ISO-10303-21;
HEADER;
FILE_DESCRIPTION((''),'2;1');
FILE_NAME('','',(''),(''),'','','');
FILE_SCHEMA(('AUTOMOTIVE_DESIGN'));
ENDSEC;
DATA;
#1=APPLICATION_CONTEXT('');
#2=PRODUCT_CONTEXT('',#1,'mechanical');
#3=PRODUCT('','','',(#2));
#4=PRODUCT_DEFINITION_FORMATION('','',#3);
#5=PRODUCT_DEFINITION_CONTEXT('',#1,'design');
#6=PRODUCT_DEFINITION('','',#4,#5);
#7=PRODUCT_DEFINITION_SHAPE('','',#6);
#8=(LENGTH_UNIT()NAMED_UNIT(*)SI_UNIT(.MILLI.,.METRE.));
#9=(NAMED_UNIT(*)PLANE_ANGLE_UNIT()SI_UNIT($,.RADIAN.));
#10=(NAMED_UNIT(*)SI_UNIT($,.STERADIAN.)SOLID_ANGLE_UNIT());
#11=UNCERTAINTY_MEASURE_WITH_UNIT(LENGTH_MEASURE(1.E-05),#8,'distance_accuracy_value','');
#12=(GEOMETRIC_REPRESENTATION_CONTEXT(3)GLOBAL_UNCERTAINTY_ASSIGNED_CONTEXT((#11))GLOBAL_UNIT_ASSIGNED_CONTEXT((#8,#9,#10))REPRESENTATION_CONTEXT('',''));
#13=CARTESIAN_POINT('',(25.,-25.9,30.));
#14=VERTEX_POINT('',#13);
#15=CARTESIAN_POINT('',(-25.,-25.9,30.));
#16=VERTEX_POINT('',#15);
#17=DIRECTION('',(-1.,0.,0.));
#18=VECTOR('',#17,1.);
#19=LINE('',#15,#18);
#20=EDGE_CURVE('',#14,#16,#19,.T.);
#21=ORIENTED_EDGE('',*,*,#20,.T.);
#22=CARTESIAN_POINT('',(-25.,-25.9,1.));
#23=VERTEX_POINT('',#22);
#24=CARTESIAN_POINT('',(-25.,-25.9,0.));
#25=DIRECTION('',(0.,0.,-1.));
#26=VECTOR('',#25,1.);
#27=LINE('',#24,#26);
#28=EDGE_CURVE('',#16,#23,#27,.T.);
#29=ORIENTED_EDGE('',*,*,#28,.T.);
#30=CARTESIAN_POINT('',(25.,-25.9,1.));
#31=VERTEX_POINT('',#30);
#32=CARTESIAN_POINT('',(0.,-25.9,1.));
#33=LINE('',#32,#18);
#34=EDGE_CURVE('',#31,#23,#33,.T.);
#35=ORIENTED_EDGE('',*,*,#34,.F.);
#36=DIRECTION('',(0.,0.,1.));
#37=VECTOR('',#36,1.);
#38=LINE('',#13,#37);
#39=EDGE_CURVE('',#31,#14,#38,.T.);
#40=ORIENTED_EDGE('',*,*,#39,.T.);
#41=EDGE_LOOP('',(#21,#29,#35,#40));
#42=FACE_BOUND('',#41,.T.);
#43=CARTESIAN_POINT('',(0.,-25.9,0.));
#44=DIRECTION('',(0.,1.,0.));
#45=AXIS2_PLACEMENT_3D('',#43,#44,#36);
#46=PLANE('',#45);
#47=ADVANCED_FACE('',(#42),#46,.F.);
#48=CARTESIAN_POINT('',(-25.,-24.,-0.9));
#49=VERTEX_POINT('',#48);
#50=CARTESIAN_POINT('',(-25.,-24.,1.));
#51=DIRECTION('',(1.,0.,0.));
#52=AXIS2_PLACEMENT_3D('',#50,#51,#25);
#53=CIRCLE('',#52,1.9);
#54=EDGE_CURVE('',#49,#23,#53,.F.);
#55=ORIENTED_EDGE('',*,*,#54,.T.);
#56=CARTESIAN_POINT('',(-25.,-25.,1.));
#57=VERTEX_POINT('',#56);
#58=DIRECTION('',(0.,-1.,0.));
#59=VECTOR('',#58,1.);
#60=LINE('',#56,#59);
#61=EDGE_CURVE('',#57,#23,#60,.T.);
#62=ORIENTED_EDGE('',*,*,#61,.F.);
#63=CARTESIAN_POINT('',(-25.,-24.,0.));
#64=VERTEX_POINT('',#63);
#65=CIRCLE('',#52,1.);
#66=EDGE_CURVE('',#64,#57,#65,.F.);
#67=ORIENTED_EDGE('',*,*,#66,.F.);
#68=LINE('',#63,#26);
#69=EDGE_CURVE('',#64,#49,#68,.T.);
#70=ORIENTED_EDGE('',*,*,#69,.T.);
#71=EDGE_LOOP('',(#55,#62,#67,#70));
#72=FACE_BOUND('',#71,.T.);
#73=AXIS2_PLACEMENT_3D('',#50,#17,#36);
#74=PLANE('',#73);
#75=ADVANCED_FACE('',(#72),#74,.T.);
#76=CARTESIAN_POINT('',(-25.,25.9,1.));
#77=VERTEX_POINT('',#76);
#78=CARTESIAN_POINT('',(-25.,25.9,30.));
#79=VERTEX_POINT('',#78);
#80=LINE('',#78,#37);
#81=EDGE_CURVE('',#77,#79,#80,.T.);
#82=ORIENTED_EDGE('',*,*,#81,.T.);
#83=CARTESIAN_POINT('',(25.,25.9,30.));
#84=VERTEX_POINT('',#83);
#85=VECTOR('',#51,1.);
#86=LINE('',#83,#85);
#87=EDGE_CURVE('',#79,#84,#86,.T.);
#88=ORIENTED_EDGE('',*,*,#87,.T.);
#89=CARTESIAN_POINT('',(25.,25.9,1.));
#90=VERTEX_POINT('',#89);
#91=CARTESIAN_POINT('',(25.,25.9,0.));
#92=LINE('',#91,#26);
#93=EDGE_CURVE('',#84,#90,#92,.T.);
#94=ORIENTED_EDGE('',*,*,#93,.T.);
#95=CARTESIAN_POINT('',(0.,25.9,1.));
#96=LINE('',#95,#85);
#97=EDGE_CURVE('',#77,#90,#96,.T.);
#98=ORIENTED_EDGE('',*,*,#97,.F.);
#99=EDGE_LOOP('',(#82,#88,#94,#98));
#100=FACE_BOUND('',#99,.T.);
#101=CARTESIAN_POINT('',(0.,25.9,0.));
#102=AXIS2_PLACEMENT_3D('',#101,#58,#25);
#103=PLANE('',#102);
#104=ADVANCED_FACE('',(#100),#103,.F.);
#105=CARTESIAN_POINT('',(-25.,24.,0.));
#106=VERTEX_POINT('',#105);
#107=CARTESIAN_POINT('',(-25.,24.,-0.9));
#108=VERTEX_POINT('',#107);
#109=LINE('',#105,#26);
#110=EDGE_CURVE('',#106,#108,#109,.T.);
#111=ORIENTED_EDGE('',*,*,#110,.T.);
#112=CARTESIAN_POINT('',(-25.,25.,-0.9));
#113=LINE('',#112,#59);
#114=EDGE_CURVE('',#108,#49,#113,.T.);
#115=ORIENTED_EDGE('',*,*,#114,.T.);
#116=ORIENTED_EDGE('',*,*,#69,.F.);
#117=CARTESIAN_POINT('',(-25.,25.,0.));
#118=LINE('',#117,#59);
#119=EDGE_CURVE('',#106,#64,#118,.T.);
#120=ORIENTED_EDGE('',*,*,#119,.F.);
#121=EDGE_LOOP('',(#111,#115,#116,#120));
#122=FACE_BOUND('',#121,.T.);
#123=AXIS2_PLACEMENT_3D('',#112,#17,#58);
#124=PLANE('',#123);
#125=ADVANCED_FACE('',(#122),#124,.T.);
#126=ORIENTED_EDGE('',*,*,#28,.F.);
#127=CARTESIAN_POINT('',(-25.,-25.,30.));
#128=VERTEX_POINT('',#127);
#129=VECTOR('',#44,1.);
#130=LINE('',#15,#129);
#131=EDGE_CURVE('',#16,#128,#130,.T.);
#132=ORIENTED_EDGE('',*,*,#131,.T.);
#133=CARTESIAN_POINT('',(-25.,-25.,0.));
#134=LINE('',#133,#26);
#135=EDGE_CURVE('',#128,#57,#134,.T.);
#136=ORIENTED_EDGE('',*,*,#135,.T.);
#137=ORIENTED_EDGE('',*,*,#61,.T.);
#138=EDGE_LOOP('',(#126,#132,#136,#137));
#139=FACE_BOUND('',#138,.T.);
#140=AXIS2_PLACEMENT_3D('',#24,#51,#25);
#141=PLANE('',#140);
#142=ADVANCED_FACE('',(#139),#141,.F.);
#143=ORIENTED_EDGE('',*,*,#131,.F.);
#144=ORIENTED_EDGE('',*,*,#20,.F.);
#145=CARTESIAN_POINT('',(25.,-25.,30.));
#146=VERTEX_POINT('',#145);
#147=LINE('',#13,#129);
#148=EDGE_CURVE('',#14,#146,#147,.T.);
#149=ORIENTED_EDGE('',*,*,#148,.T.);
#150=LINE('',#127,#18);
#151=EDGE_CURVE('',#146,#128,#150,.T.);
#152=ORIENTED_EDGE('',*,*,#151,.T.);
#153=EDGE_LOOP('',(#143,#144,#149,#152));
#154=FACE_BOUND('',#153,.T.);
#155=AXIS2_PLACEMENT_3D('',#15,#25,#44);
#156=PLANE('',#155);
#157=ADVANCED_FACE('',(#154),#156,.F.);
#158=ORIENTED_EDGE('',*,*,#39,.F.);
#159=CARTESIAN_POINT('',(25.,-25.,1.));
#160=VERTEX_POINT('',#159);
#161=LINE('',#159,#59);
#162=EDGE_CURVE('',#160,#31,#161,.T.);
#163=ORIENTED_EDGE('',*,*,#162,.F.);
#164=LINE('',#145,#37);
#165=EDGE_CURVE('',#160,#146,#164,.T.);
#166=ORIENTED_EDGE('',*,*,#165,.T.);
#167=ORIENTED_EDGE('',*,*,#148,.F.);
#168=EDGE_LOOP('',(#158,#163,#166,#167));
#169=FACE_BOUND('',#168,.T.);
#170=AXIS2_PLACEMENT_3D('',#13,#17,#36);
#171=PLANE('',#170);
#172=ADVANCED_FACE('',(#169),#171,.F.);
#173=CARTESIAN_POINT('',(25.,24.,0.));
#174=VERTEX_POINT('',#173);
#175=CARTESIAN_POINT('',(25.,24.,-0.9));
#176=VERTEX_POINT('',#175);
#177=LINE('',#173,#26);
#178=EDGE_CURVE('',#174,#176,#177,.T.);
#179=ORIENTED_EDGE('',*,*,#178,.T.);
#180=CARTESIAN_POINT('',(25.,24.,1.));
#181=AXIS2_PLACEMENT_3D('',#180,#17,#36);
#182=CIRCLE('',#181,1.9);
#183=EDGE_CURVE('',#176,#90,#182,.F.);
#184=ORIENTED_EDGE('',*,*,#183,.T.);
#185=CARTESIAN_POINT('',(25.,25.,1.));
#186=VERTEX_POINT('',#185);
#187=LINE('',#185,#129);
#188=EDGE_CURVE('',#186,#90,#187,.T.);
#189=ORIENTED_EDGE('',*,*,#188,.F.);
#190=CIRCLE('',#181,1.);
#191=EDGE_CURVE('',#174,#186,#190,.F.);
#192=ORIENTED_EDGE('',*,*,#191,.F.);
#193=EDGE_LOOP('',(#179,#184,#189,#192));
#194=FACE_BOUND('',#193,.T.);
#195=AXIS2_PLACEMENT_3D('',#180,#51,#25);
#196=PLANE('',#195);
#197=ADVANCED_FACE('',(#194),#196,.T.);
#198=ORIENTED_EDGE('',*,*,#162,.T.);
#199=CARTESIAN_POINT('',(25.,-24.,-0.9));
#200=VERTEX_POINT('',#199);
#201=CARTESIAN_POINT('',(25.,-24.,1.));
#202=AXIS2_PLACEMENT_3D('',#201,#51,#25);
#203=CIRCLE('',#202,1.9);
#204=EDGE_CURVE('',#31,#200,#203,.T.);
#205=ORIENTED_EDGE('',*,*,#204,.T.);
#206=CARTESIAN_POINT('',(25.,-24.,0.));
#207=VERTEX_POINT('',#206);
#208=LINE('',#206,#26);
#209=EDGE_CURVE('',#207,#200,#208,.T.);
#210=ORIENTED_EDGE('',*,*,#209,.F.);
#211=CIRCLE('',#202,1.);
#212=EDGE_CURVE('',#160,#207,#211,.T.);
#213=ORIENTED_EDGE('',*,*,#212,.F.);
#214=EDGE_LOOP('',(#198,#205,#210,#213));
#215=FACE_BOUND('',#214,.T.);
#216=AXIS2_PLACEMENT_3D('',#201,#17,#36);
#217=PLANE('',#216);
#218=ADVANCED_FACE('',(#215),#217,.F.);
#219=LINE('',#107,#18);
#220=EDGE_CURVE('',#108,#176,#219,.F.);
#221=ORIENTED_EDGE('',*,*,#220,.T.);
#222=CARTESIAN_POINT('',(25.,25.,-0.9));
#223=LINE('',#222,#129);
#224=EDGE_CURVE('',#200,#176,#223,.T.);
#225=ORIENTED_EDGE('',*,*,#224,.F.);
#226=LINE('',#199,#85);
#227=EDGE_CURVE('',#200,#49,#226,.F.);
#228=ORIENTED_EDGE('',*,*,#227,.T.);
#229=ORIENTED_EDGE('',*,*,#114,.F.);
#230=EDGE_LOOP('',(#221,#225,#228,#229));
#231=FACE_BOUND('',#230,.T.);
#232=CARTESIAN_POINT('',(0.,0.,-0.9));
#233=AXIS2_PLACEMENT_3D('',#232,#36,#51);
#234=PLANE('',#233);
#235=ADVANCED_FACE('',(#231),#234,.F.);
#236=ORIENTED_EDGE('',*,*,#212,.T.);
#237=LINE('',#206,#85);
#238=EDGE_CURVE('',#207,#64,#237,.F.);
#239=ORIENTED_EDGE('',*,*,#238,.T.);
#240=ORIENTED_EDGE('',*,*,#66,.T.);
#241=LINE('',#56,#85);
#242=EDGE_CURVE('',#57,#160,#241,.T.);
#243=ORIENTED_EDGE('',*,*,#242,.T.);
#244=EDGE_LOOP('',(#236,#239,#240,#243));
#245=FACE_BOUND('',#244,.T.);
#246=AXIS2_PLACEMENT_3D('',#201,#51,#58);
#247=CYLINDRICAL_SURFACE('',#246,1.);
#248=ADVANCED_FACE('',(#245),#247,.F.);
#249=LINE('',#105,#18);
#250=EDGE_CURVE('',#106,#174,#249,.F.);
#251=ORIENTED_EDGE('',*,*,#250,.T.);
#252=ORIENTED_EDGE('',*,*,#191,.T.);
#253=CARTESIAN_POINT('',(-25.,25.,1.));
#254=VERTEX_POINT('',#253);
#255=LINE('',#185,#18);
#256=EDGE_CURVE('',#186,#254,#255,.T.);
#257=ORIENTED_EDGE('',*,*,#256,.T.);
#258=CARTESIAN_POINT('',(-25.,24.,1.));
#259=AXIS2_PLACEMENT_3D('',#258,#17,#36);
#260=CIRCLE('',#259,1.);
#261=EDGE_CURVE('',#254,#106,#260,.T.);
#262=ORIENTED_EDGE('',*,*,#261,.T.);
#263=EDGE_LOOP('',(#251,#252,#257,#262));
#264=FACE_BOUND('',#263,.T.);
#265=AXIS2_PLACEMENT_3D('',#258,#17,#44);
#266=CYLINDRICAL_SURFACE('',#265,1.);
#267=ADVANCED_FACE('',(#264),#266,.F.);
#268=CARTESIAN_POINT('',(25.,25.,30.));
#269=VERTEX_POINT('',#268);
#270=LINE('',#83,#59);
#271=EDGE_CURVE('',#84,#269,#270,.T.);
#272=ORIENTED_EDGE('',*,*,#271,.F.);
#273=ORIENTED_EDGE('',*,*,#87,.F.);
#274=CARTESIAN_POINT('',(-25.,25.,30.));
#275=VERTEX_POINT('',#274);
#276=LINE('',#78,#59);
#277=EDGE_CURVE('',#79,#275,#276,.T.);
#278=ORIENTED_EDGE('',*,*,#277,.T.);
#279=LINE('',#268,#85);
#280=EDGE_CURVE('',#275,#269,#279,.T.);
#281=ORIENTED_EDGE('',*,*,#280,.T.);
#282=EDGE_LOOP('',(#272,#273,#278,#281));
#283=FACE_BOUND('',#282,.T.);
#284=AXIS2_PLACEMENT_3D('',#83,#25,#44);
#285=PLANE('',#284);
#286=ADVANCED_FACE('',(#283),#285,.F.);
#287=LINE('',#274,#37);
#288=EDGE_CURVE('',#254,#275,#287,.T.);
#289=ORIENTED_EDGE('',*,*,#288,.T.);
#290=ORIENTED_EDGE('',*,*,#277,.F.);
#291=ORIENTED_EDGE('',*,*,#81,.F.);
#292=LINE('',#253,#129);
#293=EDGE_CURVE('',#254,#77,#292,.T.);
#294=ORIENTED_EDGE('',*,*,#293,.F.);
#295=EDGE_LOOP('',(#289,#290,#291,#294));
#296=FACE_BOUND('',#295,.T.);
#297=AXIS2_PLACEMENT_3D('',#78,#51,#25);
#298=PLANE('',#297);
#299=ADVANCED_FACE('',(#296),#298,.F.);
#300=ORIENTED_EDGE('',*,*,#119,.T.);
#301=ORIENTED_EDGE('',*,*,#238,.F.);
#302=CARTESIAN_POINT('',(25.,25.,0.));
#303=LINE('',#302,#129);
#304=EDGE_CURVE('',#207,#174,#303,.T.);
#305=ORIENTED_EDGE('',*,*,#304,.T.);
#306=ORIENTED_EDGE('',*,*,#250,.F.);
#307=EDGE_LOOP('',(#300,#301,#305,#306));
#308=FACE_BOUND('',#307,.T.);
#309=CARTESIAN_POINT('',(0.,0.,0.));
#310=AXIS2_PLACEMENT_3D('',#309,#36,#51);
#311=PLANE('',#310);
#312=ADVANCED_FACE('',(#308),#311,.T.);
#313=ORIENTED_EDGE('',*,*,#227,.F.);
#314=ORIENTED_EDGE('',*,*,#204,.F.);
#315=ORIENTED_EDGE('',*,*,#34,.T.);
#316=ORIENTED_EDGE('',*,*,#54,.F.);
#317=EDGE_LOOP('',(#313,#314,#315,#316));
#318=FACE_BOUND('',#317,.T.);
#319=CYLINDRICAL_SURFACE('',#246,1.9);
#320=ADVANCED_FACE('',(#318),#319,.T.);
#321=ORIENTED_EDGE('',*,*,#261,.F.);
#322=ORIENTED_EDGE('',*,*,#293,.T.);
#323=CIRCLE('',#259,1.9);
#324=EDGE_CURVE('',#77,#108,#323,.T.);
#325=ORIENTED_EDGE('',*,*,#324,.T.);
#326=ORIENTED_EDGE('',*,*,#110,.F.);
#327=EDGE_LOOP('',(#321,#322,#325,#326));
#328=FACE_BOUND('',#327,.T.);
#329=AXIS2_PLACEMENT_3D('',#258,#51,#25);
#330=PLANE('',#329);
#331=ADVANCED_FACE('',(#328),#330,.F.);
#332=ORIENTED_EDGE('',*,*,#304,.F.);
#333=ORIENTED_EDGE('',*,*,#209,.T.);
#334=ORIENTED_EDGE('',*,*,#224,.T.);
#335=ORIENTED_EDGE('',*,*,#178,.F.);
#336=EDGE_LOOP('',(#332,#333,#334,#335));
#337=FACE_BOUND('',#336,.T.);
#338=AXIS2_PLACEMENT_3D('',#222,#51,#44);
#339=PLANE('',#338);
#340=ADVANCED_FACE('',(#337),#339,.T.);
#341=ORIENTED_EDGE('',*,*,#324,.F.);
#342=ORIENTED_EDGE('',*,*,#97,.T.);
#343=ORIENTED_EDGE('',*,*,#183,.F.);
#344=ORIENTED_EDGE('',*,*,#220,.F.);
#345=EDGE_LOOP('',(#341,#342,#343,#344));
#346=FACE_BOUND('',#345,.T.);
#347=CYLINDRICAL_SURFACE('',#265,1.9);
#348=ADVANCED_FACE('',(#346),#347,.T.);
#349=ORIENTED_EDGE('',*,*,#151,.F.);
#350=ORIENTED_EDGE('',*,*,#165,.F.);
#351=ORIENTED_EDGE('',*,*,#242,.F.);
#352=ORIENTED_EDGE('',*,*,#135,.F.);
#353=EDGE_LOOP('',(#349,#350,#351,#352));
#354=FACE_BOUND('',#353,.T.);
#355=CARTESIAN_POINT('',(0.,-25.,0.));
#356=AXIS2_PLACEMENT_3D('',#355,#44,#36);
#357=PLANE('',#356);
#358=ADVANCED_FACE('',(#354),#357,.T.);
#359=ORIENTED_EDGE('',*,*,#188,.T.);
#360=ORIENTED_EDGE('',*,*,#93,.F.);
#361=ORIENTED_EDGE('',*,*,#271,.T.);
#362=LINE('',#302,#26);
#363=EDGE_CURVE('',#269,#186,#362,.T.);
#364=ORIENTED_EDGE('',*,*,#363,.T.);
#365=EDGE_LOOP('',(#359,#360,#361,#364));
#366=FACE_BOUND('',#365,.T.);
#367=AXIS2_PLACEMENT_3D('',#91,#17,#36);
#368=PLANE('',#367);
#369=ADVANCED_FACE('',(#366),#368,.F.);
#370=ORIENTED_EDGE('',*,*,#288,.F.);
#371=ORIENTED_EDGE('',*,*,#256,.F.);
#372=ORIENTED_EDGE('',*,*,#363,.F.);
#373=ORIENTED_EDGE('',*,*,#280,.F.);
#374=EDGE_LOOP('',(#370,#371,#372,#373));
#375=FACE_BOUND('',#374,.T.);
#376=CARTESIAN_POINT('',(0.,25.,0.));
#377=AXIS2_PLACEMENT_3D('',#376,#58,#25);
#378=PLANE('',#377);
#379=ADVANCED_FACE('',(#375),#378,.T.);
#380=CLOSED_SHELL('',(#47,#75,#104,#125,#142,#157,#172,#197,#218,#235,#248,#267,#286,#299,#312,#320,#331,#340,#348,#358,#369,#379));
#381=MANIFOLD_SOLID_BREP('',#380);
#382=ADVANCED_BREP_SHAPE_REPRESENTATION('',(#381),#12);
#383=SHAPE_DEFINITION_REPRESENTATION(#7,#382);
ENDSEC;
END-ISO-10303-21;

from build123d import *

# Parameters (mm, degrees)
SKETCH1_W                    = 50
SKETCH1_H                    = 50
BASE_FLANGE1_DEPTH           = 0.9
EDGE_FLANGE1_STRIP_W         = 5.6
EDGE_FLANGE1_STRIP_H         = 0.9
EDGE_FLANGE1_STRIP_CUT_DEPTH = 50
EDGE_FLANGE1_DEPTH           = 50
EDGE_FLANGE2_STRIP_W         = 5.6
EDGE_FLANGE2_STRIP_H         = 0.9
EDGE_FLANGE2_STRIP_CUT_DEPTH = 50
EDGE_FLANGE2_DEPTH           = 50


# Sheet-metal steps are written as plain solids
with BuildPart() as part:
    # Sketch1 → Base-Flange1 (new body)
    with BuildSketch(Plane.XY):
        Rectangle(SKETCH1_W, SKETCH1_H)
    extrude(amount=-BASE_FLANGE1_DEPTH)

    # Edge-Flange1 strip (across the edge) → Edge-Flange1 strip cut (cut)
    with BuildSketch(Plane(origin=(25, 25, 0), x_dir=(0, -1, 0), z_dir=(-1, 0, 0))):
        with Locations((-1.8, -0.45)):
            Rectangle(EDGE_FLANGE1_STRIP_W, EDGE_FLANGE1_STRIP_H)
    extrude(amount=EDGE_FLANGE1_STRIP_CUT_DEPTH, mode=Mode.SUBTRACT)

    # Edge-Flange1 section (across the edge) → Edge-Flange1 (add)
    with BuildSketch(Plane(origin=(25, 25, 0), x_dir=(0, -1, 0), z_dir=(-1, 0, 0))):
        with BuildLine():
            Line((-0.9, 1), (-0.9, 30))
            Line((-0.9, 30), (0, 30))
            Line((0, 30), (0, 1))
            ThreePointArc((0, 1), (0.292893219, 0.292893219), (1, 0))
            Line((1, 0), (1, -0.9))
            ThreePointArc((1, -0.9), (-0.343502884, -0.343502884), (-0.9, 1))
        make_face()
    extrude(amount=EDGE_FLANGE1_DEPTH)

    # Edge-Flange2 strip (across the edge) → Edge-Flange2 strip cut (cut)
    with BuildSketch(Plane(origin=(-25, -25, 0), x_dir=(0, 1, 0), z_dir=(1, 0, 0))):
        with Locations((-1.8, -0.45)):
            Rectangle(EDGE_FLANGE2_STRIP_W, EDGE_FLANGE2_STRIP_H)
    extrude(amount=EDGE_FLANGE2_STRIP_CUT_DEPTH, mode=Mode.SUBTRACT)

    # Edge-Flange2 section (across the edge) → Edge-Flange2 (add)
    with BuildSketch(Plane(origin=(-25, -25, 0), x_dir=(0, 1, 0), z_dir=(1, 0, 0))):
        with BuildLine():
            Line((-0.9, 1), (-0.9, 30))
            Line((-0.9, 30), (0, 30))
            Line((0, 30), (0, 1))
            ThreePointArc((0, 1), (0.292893219, 0.292893219), (1, 0))
            Line((1, 0), (1, -0.9))
            ThreePointArc((1, -0.9), (-0.343502884, -0.343502884), (-0.9, 1))
        make_face()
    extrude(amount=EDGE_FLANGE2_DEPTH)


solid = part.part
